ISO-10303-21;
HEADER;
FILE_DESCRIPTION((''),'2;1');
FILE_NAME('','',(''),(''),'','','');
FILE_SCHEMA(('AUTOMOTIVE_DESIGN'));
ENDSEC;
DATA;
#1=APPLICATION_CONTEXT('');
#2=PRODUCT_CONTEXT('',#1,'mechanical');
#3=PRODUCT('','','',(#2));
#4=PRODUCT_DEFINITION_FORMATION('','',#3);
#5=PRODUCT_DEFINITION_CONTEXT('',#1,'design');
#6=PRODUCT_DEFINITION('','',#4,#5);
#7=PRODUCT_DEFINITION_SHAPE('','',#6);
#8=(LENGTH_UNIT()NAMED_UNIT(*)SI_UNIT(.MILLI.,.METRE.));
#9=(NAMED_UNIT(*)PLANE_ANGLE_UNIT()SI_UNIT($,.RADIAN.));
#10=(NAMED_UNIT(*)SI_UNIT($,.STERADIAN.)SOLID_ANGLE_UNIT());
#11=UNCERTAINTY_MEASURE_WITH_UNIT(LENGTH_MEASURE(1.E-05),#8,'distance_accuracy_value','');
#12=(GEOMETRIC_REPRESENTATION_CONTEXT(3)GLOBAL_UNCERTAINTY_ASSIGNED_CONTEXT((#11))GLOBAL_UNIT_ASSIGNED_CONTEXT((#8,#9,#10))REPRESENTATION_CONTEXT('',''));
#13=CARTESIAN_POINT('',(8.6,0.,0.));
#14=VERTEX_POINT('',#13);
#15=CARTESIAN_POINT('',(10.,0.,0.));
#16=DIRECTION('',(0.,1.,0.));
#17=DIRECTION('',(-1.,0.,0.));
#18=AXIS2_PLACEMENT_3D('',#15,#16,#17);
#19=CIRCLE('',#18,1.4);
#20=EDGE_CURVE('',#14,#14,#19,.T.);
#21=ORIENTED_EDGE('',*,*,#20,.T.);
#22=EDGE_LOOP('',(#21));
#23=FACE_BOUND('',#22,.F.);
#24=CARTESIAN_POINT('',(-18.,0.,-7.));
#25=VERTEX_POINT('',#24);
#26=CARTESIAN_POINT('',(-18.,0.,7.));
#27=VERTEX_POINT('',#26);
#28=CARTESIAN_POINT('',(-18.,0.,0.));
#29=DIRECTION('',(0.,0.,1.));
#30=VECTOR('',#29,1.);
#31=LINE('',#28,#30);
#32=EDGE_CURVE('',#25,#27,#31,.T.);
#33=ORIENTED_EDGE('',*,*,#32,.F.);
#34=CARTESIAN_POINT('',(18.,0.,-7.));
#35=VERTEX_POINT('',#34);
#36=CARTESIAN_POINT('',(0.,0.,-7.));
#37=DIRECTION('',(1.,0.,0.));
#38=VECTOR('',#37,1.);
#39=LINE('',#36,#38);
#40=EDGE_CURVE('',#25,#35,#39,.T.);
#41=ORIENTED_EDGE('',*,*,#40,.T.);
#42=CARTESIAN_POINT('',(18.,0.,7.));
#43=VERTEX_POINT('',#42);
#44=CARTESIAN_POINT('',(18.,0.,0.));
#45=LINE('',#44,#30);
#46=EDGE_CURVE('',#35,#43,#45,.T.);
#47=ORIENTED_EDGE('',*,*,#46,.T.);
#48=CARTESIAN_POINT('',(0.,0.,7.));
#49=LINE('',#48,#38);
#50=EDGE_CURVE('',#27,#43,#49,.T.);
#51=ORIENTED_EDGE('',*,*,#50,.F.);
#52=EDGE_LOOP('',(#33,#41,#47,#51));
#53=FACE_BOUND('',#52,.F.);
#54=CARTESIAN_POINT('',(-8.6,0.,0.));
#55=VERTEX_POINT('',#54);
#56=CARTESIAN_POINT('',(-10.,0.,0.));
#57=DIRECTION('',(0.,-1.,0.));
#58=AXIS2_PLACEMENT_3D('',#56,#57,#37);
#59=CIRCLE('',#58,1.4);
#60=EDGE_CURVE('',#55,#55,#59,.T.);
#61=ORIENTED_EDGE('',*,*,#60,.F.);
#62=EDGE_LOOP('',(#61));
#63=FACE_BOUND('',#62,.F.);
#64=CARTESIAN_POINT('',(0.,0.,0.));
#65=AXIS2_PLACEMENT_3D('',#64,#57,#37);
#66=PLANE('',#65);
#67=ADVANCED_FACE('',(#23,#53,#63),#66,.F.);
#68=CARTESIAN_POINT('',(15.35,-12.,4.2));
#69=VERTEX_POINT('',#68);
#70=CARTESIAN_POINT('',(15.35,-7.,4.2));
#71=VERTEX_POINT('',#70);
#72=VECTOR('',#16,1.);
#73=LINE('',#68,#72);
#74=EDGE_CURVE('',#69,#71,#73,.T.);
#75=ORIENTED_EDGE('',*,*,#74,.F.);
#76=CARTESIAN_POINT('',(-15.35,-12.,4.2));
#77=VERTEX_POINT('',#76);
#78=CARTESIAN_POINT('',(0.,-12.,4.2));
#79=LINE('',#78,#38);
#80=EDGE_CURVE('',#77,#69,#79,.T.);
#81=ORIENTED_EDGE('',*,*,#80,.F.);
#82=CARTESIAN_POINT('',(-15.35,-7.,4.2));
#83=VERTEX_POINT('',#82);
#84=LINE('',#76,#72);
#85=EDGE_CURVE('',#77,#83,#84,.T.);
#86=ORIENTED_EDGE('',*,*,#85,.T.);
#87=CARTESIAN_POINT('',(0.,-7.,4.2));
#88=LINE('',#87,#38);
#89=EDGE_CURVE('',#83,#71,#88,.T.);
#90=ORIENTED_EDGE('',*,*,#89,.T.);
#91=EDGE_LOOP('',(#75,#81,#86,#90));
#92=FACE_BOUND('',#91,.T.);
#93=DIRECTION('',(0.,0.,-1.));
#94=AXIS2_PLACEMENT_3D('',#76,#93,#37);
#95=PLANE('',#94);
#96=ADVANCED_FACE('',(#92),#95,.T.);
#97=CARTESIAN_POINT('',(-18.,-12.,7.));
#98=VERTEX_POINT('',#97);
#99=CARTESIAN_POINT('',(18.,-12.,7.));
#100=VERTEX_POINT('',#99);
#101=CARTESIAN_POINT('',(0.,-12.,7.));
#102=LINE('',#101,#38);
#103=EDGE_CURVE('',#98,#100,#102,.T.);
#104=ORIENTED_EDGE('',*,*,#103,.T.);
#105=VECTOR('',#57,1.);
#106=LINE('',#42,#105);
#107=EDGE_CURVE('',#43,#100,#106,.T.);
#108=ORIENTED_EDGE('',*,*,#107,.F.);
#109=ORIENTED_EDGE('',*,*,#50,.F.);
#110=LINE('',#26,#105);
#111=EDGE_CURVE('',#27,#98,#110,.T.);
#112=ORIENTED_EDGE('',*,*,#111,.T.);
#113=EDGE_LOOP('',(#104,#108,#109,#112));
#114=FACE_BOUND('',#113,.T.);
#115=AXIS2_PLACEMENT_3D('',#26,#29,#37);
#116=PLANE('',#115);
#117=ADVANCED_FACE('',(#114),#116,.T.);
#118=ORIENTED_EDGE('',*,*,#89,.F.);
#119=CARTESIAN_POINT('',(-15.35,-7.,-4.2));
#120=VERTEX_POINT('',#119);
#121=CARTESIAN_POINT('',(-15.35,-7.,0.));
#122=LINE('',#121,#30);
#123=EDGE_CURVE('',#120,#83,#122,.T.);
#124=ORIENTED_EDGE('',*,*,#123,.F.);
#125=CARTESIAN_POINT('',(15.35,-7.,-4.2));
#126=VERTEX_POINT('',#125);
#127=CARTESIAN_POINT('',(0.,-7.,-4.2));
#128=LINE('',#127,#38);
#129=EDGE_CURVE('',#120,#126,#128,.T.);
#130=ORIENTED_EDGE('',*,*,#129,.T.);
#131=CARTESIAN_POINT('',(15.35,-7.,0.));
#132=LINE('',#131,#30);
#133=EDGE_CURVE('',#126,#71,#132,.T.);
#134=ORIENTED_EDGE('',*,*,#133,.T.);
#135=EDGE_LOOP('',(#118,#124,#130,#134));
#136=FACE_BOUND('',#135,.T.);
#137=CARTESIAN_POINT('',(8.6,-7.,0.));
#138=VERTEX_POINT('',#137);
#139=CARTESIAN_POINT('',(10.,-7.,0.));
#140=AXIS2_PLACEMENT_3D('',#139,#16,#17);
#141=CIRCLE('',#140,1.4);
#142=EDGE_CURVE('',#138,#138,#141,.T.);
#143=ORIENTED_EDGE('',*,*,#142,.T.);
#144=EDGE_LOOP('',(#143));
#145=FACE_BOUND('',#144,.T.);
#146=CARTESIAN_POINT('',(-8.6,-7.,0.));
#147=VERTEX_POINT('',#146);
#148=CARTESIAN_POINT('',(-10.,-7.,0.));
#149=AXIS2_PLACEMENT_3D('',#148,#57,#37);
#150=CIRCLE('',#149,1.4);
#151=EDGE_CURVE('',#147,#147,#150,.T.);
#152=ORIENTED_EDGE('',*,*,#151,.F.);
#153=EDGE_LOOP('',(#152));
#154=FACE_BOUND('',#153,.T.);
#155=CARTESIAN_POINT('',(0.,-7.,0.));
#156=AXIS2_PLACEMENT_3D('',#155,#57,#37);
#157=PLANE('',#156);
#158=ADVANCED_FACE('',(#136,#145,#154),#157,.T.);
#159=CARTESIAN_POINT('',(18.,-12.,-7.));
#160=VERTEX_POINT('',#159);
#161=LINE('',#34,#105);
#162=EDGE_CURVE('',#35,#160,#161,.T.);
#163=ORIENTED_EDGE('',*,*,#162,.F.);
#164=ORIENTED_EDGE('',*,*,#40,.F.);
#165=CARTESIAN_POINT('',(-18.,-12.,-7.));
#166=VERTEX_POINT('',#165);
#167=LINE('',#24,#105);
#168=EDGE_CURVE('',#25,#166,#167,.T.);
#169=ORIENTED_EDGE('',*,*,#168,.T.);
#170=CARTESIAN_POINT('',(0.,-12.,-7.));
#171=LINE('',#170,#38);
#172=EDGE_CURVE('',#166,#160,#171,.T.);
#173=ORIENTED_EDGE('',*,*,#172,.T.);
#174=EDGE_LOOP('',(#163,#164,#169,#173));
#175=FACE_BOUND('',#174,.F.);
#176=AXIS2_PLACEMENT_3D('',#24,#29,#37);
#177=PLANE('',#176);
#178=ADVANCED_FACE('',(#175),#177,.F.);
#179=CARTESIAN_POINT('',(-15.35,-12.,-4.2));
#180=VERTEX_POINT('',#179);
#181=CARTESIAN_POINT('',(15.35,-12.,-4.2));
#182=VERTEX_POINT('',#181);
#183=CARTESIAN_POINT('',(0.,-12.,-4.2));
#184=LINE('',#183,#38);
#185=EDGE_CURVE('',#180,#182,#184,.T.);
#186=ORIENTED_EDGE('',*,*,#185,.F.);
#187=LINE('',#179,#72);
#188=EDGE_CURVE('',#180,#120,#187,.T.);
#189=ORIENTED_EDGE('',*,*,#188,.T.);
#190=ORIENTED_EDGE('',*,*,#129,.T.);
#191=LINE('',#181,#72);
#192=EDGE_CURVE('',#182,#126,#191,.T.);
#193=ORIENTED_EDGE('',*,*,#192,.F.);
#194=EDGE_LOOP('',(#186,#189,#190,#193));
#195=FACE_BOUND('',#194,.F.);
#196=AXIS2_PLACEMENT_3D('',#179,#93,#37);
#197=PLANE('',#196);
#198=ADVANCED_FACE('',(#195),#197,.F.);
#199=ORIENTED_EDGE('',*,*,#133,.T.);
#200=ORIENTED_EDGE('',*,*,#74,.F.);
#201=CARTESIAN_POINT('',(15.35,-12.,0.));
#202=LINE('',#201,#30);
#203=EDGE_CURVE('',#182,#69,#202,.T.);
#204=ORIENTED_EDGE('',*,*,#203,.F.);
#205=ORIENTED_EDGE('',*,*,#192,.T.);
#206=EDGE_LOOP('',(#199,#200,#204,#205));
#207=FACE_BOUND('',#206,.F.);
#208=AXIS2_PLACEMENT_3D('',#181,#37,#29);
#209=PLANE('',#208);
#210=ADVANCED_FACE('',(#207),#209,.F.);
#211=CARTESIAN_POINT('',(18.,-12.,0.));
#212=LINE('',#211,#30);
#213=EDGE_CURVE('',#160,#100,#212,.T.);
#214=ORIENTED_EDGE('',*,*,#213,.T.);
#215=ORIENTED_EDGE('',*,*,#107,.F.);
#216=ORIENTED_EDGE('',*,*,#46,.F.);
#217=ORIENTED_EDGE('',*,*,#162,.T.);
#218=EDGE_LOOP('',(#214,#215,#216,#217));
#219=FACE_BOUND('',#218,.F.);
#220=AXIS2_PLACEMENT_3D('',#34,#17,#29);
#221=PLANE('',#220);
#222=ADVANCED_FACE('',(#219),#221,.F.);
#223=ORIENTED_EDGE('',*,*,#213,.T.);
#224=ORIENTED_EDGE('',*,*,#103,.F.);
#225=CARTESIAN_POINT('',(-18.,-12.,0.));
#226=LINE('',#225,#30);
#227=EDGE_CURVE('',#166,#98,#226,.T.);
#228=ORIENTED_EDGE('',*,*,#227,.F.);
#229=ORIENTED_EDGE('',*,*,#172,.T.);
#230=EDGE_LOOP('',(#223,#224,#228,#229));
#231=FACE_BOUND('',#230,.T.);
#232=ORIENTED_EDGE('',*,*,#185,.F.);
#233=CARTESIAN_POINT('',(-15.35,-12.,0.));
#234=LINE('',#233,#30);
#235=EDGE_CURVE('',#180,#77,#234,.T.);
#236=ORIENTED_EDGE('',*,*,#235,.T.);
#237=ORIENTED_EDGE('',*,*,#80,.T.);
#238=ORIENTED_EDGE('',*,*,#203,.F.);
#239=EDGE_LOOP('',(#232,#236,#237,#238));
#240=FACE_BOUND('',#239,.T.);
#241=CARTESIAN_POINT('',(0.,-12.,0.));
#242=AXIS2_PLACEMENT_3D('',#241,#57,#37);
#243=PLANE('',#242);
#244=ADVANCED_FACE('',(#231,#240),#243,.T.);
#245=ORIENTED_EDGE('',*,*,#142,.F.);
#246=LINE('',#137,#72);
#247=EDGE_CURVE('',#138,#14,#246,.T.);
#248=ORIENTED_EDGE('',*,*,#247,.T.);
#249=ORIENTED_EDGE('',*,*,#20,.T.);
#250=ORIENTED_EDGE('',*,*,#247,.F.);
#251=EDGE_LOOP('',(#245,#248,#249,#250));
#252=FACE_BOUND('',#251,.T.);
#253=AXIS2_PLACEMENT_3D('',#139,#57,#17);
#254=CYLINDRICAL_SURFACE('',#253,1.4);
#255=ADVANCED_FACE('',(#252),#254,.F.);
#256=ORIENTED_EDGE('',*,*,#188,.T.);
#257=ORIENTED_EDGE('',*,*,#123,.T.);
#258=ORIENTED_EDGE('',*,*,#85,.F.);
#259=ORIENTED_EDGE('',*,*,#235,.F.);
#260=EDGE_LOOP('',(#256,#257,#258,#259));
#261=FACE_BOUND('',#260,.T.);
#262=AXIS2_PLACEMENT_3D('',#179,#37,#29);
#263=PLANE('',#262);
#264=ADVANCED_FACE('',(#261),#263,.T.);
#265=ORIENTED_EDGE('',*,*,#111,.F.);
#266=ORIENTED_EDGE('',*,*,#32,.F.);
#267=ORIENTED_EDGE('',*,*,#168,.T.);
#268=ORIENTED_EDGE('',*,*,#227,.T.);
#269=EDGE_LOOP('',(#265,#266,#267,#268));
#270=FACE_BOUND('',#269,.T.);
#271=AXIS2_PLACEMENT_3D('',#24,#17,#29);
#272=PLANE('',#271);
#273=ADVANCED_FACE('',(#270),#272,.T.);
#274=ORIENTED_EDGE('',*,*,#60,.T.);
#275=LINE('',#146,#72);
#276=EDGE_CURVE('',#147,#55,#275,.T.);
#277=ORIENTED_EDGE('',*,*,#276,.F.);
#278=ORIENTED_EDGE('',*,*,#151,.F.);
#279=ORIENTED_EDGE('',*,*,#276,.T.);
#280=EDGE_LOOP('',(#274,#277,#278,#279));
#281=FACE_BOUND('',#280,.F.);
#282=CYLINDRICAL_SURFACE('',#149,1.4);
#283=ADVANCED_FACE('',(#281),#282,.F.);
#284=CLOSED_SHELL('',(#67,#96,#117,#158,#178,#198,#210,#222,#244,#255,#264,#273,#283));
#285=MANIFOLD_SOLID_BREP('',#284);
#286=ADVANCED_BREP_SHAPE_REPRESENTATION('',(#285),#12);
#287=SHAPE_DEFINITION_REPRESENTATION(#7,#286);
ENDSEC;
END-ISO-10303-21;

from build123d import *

# Parameters (mm, degrees)
F0_W     = 36
F0_H     = 14
F1_DEPTH = 12
F2_W     = 30.7
F2_H     = 8.4
F3_DEPTH = 5
F4_R     = 1.4
F5_DEPTH = 7


# Not quite as in the source:
# - a pattern or mirror of a feature is missing from the dataset's text; its kind, count and spacing are read off the source's solid


with BuildPart() as f1:
    # F0 (on Front) → F1 (new body)
    with BuildSketch(Plane.XZ):
        Rectangle(F0_W, F0_H)
    extrude(amount=F1_DEPTH)

    # F2 (on face) → F3 (cut)
    with BuildSketch(Plane.XZ.offset(12)):
        Rectangle(F2_W, F2_H)
    extrude(amount=-F3_DEPTH, mode=Mode.SUBTRACT)

    # F4 (on face) → F5 (cut, through all)
    with BuildSketch(Plane.XZ.offset(7)):
        with Locations((-10, 0)):
            Circle(F4_R)
    f5 = extrude(amount=-F5_DEPTH, mode=Mode.SUBTRACT)

    # F5_copies: F5 across plane
    add(f5.mirror(Plane(origin=(0, 0, 0), x_dir=(0, 0, 1), z_dir=(1, 0, 0))), mode=Mode.SUBTRACT)


solid = f1.part
